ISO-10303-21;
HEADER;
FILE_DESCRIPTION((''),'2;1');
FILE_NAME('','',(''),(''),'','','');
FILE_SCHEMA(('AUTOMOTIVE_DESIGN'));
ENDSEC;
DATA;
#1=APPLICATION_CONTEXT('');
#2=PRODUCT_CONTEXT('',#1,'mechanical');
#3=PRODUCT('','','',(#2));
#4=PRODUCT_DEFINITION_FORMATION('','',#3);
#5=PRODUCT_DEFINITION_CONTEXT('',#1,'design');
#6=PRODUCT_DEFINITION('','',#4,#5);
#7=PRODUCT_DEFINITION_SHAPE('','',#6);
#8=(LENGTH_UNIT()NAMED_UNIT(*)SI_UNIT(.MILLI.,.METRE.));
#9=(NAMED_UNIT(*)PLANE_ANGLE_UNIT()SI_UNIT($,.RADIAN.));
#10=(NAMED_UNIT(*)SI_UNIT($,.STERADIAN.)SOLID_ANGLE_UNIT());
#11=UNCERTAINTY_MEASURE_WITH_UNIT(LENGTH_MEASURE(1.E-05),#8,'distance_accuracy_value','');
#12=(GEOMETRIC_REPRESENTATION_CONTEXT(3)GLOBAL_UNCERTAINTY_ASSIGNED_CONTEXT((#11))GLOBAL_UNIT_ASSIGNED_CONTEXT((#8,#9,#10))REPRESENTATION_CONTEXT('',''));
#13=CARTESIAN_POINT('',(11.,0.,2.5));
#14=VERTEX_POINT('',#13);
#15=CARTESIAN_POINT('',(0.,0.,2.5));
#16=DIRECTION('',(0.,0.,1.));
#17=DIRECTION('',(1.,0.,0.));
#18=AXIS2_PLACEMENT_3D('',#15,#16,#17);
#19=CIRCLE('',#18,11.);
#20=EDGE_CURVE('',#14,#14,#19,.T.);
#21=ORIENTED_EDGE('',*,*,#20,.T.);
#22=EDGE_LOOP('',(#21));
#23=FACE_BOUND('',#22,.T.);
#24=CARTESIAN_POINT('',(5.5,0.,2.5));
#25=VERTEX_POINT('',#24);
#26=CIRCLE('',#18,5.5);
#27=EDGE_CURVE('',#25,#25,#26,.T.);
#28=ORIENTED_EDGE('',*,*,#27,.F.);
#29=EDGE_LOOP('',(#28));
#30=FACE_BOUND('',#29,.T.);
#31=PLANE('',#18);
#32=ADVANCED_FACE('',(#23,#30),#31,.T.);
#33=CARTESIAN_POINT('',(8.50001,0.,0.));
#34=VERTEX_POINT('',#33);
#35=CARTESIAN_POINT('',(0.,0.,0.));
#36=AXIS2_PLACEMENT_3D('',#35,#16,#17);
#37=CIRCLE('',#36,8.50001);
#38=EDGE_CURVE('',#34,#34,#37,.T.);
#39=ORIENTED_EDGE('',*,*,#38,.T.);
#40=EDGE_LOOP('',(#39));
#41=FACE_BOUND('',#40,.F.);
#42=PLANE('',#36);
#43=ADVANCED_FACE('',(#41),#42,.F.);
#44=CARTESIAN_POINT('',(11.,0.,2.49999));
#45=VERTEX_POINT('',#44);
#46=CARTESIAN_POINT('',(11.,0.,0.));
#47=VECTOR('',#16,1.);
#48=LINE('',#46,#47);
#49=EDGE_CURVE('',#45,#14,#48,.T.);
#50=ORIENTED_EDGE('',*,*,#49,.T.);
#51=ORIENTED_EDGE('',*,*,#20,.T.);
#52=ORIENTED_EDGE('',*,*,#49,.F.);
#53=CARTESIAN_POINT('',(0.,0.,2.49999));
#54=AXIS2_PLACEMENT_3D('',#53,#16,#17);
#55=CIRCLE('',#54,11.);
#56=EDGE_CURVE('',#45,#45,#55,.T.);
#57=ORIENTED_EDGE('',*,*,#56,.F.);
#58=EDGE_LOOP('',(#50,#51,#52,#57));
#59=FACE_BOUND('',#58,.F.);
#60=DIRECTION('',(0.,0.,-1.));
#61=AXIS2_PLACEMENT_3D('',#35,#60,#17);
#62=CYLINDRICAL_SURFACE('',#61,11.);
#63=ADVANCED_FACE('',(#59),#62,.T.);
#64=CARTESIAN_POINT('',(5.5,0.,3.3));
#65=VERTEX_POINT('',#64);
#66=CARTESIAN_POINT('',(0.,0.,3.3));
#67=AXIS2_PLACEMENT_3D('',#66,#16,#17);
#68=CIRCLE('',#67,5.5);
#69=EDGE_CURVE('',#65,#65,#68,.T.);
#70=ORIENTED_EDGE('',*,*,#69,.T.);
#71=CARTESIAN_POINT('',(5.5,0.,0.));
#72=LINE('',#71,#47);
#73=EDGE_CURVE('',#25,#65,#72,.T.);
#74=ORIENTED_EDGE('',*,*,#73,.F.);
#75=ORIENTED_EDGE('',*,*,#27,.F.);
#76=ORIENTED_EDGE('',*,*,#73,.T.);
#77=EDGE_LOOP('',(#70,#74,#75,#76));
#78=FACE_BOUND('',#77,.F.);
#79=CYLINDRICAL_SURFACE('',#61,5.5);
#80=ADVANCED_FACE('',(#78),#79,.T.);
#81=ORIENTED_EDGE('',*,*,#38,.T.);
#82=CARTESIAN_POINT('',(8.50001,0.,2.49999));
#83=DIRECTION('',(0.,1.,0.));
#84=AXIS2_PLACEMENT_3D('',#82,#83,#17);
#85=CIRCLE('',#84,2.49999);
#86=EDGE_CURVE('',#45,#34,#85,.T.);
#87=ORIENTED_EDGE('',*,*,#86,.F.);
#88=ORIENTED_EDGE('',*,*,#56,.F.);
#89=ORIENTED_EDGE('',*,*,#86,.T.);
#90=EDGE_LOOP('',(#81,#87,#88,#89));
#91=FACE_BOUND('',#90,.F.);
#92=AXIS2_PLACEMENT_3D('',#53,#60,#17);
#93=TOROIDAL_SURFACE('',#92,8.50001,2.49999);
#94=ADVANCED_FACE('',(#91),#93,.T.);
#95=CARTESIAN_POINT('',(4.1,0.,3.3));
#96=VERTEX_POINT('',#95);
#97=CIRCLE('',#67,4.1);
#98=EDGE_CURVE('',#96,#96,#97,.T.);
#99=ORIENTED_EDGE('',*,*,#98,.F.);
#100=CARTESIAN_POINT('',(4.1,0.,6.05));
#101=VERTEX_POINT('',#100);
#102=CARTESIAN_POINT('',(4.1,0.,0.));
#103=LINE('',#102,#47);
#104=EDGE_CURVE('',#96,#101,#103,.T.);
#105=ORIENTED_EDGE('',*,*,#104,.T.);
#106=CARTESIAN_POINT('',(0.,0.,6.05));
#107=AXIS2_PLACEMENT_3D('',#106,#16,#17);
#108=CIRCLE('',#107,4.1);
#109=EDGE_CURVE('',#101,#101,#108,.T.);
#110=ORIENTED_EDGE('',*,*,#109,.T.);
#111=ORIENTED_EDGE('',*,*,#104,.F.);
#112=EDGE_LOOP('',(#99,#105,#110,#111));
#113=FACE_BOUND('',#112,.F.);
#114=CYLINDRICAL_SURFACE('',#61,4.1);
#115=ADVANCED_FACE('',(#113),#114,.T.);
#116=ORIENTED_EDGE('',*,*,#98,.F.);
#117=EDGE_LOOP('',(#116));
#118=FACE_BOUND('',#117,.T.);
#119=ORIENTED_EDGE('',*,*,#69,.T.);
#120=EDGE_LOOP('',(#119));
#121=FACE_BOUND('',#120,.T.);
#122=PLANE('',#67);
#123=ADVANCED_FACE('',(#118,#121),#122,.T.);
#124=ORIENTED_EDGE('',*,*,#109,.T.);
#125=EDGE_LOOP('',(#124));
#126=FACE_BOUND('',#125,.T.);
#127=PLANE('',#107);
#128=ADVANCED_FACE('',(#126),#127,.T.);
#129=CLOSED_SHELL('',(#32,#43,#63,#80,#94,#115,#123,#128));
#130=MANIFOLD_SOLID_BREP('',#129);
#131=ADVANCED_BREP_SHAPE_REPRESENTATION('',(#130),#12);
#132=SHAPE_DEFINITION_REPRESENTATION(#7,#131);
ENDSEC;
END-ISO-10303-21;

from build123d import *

# Parameters (mm, degrees)
F0_R     = 11
F0_R_2   = 5.5
F1_DEPTH = 2.5
F0_R_3   = 4.1
F2_DEPTH = 3.3
F3_DEPTH = 6.05
F4_R     = 2.49999


# Not quite as in the source:
# - a fillet or chamfer is up to 0.001 mm smaller than in the source, because OpenCascade refuses the exact size


with BuildPart() as f1:
    # F0 (on Top) → F1 (new body)
    with BuildSketch(Plane.XY):
        Circle(F0_R)
        Circle(F0_R_2, mode=Mode.SUBTRACT)
    extrude(amount=F1_DEPTH)

    # F0 (on Top) → F2 (join, through all)
    with BuildSketch(Plane.XY):
        Circle(F0_R_2)
        Circle(F0_R_3, mode=Mode.SUBTRACT)
    extrude(amount=F2_DEPTH)

    # F0 (on Top) → F3 (join, through all)
    with BuildSketch(Plane.XY):
        Circle(F0_R_3)
    extrude(amount=F3_DEPTH)

    # F4 (radius 2.5 in the source; OpenCascade refuses exactly that, so slightly less here)
    f4_edges = [f1.edges().sort_by_distance(p)[0] for p in [
        (-11, 0, 0),
    ]]
    fillet(f4_edges, radius=F4_R)


solid = f1.part
